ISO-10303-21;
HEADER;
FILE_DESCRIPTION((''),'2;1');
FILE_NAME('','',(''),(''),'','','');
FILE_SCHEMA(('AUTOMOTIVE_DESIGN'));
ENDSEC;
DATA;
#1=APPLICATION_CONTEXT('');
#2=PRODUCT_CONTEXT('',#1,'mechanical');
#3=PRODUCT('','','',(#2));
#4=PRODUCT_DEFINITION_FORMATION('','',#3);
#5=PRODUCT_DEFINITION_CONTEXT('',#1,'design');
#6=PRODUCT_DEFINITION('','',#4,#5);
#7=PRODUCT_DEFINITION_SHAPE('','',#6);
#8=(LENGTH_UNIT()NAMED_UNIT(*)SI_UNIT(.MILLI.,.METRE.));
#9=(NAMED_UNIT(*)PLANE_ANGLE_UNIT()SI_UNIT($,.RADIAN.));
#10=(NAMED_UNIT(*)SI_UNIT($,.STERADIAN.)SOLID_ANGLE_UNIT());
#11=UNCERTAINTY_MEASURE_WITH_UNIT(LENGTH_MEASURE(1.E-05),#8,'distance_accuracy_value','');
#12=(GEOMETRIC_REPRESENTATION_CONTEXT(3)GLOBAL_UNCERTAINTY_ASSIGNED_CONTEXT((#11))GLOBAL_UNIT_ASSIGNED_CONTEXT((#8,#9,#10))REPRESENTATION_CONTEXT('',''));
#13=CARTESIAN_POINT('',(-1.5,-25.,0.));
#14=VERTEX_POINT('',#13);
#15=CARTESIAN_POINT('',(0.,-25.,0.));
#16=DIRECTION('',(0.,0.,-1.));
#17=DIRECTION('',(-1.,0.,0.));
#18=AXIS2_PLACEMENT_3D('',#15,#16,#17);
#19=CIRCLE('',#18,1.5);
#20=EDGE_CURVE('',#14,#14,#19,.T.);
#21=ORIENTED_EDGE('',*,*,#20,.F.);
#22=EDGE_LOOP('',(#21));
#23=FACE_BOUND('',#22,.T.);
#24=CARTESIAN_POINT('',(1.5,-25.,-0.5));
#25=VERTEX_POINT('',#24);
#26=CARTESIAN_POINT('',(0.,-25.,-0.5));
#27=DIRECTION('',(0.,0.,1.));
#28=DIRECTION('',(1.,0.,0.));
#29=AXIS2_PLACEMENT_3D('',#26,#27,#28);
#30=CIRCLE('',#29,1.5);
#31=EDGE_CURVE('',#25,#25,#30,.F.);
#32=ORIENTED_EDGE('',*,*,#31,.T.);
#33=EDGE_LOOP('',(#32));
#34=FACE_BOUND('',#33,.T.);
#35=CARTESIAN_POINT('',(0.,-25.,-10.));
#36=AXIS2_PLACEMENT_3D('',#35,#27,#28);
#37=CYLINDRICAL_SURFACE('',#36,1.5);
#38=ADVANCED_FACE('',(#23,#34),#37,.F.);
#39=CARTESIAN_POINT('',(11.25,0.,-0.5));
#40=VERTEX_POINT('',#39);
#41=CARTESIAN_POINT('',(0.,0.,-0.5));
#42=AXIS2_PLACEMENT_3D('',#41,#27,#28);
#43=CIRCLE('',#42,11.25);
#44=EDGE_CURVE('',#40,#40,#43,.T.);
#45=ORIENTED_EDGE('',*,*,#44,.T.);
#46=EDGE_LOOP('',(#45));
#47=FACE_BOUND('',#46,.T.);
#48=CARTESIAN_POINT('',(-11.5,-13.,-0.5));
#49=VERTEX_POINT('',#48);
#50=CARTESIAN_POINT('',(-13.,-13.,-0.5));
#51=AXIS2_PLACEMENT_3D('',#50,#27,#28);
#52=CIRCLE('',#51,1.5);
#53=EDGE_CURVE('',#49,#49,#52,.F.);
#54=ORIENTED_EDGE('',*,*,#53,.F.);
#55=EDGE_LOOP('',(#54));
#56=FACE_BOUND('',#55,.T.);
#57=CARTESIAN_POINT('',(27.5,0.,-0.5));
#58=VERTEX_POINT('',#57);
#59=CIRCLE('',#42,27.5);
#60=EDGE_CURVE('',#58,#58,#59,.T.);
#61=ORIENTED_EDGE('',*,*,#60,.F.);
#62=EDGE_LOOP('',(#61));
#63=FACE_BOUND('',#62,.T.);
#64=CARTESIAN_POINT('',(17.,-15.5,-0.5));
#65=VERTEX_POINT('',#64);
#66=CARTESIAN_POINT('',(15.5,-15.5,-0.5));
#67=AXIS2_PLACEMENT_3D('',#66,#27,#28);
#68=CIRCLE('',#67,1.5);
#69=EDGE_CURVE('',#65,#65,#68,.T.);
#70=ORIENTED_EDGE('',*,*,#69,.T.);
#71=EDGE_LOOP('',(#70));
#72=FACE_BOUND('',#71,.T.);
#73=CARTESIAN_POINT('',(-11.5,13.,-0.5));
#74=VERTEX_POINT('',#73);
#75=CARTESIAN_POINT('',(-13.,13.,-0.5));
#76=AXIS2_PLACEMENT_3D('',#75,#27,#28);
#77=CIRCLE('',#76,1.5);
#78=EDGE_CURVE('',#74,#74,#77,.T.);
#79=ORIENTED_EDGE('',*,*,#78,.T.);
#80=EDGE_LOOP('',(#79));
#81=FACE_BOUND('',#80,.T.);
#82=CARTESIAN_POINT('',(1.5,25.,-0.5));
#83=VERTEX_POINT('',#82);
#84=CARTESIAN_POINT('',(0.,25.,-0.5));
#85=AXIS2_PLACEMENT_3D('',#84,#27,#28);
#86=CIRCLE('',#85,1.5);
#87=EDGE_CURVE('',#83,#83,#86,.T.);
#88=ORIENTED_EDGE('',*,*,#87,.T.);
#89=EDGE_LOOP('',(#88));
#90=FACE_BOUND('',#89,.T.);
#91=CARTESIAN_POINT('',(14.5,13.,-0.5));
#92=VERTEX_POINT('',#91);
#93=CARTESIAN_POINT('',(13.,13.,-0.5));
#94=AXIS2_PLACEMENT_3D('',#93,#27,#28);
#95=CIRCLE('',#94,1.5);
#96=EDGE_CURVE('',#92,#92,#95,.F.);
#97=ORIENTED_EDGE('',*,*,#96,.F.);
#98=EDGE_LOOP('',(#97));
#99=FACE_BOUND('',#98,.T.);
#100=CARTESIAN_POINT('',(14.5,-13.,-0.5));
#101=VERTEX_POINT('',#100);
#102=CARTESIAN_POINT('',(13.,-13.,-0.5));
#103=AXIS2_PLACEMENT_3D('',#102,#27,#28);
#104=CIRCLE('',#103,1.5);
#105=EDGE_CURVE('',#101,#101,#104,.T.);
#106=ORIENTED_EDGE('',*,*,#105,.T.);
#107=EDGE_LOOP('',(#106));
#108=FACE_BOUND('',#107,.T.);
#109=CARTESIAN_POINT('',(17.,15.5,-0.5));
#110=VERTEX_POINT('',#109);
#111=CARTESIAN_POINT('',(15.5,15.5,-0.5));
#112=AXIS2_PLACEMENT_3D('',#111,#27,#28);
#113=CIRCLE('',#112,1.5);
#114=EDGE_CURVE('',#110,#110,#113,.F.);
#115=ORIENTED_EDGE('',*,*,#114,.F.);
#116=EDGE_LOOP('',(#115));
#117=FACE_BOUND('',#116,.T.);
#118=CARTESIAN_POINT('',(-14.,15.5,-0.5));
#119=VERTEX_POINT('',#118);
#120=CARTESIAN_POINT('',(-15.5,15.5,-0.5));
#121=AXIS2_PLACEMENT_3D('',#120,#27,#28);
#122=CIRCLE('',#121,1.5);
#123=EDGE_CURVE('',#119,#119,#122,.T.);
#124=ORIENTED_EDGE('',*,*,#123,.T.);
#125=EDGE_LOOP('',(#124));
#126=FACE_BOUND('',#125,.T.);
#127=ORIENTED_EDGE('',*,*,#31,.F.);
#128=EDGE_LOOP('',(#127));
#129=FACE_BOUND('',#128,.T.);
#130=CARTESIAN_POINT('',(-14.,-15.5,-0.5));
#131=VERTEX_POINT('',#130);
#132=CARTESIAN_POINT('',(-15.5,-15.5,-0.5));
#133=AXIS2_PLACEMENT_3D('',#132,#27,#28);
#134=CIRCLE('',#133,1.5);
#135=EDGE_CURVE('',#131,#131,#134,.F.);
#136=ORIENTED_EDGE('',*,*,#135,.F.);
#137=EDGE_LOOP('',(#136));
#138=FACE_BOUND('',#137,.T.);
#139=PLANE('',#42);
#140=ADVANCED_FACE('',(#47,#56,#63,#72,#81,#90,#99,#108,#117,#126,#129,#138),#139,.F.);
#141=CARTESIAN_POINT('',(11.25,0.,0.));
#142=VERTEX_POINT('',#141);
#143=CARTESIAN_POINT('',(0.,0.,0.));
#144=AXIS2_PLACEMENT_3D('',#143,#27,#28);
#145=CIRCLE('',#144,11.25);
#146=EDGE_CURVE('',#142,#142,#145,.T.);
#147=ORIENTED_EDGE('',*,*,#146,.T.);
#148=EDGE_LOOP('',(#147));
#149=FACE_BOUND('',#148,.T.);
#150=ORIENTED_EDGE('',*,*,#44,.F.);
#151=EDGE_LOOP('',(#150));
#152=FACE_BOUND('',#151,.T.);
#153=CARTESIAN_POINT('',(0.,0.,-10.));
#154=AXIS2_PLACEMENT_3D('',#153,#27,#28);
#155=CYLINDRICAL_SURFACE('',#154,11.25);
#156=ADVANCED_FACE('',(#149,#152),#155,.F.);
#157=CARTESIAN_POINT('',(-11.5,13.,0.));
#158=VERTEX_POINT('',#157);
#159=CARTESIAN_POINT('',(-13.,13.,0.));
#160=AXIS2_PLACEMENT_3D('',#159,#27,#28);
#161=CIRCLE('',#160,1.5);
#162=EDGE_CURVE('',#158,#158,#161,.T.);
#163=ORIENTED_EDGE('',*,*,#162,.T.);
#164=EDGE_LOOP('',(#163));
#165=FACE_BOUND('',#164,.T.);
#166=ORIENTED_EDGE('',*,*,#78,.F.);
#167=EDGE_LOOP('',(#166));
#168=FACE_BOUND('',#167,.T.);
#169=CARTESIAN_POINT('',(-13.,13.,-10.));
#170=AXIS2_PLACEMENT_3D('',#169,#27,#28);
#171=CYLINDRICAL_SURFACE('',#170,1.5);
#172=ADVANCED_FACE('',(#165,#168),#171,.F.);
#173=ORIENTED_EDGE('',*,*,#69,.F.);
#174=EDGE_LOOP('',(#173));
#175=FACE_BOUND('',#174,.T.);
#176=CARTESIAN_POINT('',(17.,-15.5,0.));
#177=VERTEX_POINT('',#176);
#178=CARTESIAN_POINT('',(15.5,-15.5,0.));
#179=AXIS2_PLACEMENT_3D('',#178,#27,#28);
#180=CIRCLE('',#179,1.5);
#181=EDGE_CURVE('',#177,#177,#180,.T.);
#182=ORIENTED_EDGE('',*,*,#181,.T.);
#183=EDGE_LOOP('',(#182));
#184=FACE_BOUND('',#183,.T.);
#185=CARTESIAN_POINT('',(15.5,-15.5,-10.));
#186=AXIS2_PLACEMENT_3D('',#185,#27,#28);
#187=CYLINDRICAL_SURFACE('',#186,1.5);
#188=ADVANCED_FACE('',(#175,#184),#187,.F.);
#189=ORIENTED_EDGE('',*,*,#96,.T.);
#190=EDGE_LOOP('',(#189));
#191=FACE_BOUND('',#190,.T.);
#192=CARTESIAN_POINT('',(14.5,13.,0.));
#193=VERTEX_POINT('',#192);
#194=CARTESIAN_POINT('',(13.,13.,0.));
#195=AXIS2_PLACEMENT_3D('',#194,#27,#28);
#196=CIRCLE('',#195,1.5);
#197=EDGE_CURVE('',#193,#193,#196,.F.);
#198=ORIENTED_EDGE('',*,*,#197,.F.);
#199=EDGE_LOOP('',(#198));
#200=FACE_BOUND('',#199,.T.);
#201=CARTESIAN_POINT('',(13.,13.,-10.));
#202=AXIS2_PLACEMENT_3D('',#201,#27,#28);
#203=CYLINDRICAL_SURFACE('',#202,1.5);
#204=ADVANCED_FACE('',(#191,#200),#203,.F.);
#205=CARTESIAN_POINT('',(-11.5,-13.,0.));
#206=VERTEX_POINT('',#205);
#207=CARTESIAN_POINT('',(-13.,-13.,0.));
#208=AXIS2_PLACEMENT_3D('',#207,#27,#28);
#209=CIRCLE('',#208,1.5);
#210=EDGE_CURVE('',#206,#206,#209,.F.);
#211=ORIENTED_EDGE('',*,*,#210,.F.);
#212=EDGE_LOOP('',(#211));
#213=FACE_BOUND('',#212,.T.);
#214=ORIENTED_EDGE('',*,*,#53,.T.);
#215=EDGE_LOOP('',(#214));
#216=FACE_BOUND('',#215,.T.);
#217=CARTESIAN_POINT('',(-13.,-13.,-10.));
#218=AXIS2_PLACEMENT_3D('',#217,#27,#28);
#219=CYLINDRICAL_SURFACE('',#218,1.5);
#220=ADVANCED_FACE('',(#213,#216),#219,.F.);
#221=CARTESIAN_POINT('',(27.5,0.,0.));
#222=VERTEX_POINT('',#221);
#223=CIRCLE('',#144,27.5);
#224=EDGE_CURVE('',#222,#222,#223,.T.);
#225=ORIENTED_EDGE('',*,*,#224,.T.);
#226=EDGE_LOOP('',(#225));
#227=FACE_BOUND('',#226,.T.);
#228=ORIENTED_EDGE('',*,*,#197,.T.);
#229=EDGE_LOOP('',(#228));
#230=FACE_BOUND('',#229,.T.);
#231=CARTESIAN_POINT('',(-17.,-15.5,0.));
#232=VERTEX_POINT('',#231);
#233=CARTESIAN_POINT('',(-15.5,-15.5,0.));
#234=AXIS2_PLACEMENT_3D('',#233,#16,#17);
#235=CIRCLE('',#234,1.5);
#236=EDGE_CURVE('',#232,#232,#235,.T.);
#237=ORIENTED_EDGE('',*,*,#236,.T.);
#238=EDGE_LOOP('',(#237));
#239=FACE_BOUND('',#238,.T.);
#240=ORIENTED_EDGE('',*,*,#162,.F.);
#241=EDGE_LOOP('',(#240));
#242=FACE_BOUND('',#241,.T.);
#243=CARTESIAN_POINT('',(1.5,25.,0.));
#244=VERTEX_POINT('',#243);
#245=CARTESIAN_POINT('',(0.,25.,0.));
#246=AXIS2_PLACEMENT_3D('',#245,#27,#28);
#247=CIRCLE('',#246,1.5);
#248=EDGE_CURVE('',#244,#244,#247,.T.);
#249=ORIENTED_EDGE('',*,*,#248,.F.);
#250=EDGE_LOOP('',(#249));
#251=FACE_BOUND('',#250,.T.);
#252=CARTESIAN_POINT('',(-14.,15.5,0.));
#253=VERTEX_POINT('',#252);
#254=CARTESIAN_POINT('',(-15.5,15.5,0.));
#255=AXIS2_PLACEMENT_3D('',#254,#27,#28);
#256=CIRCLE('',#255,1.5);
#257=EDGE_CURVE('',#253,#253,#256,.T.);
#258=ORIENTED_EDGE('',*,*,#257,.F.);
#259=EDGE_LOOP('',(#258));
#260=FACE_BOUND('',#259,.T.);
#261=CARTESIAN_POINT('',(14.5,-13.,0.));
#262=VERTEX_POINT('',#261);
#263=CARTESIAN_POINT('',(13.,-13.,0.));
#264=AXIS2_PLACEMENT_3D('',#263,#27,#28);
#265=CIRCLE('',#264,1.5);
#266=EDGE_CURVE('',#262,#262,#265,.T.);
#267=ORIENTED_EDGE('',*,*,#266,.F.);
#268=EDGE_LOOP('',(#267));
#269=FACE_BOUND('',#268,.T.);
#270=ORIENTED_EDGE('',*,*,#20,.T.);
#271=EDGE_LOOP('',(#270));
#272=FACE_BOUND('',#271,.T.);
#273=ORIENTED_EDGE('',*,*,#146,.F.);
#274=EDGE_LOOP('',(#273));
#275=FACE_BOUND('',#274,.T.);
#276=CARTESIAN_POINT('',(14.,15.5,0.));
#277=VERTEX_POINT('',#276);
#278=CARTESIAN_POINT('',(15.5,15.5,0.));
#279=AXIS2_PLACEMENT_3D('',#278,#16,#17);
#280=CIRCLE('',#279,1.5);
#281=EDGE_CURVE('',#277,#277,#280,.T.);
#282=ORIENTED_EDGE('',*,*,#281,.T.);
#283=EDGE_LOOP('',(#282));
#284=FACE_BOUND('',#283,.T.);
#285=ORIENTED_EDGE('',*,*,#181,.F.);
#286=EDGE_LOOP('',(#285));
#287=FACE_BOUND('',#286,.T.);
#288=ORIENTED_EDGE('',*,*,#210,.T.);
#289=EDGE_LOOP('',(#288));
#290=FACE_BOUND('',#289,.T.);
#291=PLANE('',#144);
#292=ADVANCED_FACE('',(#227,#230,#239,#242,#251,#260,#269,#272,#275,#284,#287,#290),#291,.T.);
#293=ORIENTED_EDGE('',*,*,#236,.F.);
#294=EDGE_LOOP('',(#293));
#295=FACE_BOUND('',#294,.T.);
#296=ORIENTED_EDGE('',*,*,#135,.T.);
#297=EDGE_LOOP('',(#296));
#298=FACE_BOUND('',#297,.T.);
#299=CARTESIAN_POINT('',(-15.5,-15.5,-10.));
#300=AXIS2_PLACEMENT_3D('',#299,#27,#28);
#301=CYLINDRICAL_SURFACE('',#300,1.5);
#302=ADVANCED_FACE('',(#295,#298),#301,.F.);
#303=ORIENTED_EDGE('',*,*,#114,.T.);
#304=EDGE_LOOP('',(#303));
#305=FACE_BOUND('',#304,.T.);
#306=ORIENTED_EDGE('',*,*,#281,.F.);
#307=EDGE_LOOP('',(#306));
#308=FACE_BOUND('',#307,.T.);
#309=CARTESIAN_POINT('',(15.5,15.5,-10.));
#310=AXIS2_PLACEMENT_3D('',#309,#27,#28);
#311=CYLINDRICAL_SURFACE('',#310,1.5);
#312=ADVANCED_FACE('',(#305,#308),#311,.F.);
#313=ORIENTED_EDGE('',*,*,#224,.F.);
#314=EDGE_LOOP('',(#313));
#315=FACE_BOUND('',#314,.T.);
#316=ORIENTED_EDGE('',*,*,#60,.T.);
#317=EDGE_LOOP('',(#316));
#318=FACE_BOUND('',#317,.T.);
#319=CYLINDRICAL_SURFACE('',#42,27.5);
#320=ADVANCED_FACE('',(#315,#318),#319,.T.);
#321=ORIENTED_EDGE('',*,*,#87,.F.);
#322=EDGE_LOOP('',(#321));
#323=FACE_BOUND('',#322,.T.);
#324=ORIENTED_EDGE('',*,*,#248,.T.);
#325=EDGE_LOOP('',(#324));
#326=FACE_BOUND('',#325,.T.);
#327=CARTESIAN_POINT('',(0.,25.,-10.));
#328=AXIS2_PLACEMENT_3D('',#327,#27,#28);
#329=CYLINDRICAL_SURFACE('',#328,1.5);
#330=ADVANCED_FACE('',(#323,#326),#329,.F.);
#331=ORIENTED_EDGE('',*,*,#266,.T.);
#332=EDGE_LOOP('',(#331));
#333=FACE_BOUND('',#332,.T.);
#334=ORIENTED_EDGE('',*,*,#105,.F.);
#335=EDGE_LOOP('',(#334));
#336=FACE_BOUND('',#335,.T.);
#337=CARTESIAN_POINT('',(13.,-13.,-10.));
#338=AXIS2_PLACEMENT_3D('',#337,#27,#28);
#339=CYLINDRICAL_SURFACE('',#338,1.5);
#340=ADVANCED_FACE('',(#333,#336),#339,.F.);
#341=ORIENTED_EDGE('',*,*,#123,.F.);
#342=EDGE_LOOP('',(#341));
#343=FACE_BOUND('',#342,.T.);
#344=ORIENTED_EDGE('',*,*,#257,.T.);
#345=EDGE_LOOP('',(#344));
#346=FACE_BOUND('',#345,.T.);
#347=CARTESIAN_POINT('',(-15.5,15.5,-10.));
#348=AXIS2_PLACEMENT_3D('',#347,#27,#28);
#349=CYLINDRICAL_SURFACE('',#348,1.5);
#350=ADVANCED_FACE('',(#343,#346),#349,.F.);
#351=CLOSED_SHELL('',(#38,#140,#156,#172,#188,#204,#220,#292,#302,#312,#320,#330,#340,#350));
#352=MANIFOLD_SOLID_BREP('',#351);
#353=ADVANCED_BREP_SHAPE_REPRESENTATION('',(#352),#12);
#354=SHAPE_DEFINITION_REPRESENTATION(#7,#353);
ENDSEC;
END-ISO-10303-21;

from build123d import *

# Parameters (mm, degrees)
CROQUIS1_R            = 27.5
BRIDA_BASE1_DEPTH     = 0.5
CROQUIS6_R            = 11.25
CROQUIS6_R_2          = 1.5
CORTAR_EXTRUIR3_DEPTH = 10


# Sheet-metal steps are written as plain solids
with BuildPart() as part:
    # Croquis1 → Brida base1 (new body)
    with BuildSketch(Plane.XY):
        Circle(CROQUIS1_R)
    extrude(amount=-BRIDA_BASE1_DEPTH)

    # Croquis6 → Cortar-Extruir3 (cut)
    with BuildSketch(Plane.XY):
        Circle(CROQUIS6_R)
        with Locations((-13, 13)):
            Circle(CROQUIS6_R_2)
        with Locations((-13, -13)):
            Circle(CROQUIS6_R_2)
        with Locations((13, 13)):
            Circle(CROQUIS6_R_2)
        with Locations((0, 25)):
            Circle(CROQUIS6_R_2)
        with Locations((-15.5, 15.5)):
            Circle(CROQUIS6_R_2)
        with Locations((-15.5, -15.5)):
            Circle(CROQUIS6_R_2)
        with Locations((0, -25)):
            Circle(CROQUIS6_R_2)
        with Locations((13, -13)):
            Circle(CROQUIS6_R_2)
        with Locations((15.5, -15.5)):
            Circle(CROQUIS6_R_2)
        with Locations((15.5, 15.5)):
            Circle(CROQUIS6_R_2)
    extrude(amount=-CORTAR_EXTRUIR3_DEPTH, mode=Mode.SUBTRACT)


solid = part.part
